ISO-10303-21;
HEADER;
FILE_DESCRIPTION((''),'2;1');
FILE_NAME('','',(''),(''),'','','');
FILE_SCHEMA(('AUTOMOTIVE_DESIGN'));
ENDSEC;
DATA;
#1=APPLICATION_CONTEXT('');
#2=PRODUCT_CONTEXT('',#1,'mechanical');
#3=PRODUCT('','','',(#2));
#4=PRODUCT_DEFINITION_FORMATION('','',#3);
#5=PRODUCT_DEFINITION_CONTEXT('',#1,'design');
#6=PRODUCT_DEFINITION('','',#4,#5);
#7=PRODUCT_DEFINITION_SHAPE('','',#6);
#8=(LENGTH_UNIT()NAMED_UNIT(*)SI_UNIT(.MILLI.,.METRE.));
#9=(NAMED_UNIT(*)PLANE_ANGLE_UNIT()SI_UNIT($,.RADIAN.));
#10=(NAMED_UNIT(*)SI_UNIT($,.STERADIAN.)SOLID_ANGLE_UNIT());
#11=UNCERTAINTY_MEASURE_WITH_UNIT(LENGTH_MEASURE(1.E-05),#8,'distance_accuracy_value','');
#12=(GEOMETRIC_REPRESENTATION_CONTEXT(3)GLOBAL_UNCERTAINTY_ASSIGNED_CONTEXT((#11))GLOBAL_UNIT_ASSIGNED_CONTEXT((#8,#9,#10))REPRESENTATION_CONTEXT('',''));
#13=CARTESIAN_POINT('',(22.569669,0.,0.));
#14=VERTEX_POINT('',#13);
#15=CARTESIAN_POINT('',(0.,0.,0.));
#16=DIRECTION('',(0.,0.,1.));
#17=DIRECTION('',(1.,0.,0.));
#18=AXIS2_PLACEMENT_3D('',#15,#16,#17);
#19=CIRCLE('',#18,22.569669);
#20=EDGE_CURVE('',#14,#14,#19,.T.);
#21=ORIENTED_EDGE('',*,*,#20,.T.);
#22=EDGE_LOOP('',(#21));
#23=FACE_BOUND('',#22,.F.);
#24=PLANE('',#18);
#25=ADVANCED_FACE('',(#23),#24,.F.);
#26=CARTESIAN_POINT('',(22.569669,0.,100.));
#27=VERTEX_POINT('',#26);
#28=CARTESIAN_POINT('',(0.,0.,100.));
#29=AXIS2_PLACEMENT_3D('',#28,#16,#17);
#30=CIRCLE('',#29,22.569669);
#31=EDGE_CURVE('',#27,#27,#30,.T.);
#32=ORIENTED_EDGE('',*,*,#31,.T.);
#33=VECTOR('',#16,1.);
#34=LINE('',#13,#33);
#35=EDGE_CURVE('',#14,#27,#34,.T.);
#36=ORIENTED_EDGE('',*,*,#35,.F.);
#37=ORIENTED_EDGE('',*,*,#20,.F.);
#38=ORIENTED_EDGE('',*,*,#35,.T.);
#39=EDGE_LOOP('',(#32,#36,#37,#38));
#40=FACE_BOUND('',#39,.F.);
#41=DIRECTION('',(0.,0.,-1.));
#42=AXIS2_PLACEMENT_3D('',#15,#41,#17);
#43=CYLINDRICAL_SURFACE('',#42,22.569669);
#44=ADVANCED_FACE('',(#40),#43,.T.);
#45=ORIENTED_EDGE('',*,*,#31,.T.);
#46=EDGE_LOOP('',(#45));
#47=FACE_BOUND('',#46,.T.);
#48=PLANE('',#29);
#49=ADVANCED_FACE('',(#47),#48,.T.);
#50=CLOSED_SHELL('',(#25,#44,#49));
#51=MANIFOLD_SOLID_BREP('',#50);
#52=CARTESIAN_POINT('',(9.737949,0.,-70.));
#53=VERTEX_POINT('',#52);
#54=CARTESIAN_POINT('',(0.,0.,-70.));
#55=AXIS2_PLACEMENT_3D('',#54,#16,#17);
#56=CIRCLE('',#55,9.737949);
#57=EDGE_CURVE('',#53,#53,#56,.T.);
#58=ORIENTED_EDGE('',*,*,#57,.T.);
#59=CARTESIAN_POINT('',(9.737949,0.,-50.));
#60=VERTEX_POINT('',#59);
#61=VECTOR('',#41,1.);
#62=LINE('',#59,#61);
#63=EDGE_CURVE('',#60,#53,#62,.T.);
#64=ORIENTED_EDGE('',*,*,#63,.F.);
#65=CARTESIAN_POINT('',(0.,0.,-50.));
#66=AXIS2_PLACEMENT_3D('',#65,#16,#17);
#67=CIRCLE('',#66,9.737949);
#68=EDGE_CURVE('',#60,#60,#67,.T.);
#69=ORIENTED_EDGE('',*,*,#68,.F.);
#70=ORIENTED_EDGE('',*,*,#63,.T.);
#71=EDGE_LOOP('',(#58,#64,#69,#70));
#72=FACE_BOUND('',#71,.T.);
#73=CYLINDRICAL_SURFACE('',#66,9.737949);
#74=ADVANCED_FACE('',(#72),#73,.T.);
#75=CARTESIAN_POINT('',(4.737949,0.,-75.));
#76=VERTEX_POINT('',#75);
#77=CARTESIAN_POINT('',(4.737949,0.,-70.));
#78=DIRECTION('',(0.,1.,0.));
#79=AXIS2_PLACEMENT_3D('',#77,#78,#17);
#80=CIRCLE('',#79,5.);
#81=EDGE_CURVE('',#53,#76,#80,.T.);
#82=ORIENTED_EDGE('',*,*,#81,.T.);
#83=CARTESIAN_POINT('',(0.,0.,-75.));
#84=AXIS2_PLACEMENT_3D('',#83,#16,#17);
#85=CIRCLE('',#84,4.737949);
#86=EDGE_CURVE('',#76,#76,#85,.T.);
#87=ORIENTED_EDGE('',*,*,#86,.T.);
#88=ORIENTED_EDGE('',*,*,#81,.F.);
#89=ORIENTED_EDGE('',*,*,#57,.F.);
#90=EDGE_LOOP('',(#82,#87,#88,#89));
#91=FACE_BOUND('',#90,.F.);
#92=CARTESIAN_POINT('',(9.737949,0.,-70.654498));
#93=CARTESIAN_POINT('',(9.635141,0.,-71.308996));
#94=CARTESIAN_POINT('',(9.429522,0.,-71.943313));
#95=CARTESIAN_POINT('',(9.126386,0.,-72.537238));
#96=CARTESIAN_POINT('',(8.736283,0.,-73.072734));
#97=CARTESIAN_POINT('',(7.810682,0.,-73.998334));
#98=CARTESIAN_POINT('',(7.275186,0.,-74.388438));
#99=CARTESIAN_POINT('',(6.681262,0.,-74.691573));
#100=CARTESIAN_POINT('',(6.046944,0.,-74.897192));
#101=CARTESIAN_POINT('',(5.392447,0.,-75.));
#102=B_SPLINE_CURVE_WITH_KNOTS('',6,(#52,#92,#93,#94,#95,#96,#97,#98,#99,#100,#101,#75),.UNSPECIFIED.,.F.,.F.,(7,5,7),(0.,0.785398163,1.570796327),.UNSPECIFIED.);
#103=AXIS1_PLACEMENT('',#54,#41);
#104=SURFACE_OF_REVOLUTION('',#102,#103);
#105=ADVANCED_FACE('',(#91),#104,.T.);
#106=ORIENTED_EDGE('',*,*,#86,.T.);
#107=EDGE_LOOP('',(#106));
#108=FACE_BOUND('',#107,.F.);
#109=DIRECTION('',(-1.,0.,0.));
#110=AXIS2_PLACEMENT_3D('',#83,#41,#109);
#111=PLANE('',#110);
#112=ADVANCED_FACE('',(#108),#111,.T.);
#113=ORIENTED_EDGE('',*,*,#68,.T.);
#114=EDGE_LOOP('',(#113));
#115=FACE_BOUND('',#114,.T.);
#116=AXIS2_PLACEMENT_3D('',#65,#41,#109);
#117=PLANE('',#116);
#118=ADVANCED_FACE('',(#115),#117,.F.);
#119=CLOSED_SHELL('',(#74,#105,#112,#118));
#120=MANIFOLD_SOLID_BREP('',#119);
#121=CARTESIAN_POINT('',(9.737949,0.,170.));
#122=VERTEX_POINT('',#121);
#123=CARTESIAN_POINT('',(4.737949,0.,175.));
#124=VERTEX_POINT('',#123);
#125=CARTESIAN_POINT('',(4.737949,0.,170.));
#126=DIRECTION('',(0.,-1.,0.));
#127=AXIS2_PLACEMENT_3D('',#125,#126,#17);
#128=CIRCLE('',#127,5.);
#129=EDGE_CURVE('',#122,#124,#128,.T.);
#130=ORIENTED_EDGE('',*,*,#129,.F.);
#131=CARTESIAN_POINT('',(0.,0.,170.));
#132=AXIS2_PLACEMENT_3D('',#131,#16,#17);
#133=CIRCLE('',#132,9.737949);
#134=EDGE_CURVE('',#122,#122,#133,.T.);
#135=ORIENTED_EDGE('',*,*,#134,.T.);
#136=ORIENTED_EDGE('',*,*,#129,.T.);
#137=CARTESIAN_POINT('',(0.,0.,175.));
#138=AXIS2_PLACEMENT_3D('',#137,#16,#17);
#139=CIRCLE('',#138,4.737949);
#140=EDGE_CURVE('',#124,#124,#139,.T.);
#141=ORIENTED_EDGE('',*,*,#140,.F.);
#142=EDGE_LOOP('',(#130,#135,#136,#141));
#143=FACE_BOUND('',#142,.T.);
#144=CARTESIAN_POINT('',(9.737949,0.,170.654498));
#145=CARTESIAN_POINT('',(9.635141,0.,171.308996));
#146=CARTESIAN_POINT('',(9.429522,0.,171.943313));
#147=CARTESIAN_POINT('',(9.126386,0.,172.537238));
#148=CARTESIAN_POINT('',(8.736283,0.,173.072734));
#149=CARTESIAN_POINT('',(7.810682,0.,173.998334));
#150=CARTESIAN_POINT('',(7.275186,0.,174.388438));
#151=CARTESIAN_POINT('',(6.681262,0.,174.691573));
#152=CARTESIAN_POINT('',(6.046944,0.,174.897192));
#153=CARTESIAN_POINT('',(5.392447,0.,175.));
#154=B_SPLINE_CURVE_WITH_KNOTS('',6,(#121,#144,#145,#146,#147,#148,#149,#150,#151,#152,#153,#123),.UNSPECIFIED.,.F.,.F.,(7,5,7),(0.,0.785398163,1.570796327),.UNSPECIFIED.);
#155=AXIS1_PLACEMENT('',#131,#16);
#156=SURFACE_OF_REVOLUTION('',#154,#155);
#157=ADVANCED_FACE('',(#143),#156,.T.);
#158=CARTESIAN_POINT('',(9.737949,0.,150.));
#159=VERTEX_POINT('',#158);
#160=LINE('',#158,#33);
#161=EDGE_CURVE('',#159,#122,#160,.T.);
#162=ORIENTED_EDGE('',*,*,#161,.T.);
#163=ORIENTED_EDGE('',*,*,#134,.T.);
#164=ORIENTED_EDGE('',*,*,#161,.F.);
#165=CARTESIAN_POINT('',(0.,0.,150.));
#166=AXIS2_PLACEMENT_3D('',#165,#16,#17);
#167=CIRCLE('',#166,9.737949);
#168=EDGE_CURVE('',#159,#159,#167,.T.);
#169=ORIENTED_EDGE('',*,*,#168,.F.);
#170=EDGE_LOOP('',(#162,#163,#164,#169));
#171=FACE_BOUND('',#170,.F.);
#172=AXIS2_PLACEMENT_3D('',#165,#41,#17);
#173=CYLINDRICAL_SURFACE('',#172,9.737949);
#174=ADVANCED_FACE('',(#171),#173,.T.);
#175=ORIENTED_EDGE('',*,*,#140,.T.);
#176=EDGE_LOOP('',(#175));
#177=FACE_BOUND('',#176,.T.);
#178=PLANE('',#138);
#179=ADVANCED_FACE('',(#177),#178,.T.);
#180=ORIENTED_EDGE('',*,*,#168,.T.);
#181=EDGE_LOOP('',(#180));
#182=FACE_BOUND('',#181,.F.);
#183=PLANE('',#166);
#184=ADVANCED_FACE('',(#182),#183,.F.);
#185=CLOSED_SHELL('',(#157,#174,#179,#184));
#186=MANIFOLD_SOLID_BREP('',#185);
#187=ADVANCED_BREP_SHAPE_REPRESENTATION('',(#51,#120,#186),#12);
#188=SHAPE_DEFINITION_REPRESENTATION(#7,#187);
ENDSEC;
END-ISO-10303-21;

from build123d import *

# Parameters (mm, degrees)
F0_R     = 22.5696692522
F1_DEPTH = 100
F7_R     = 9.7379485752
F8_DEPTH = 25
F9_R     = 5


# Not quite as in the source:
# - a feature of the source that left no trace in its solid (it failed there, or was rolled back) is left out
# - the program builds the solid bodies; features that only make, move or delete a surface that nothing else refers to are left out


with BuildPart() as f1:
    # F0 (on Top) → F1 (new body)
    with BuildSketch(Plane.XY):
        Circle(F0_R)
    extrude(amount=F1_DEPTH)


with BuildPart() as f8:
    # F7 (on offset) → F8 (new body)
    with BuildSketch(Plane.XY.offset(150)):
        Circle(F7_R)
    extrude(amount=F8_DEPTH)

    # F9
    f9_edges = [f8.edges().sort_by_distance(p)[0] for p in [
        (-9.737949, 0, 175),
    ]]
    fillet(f9_edges, radius=F9_R)


with BuildPart() as f10_1:
    # F10: instance of F8
    add(f8.part.mirror(Plane.XY.offset(50)))


solid = Compound([f1.part, f8.part, f10_1.part])
